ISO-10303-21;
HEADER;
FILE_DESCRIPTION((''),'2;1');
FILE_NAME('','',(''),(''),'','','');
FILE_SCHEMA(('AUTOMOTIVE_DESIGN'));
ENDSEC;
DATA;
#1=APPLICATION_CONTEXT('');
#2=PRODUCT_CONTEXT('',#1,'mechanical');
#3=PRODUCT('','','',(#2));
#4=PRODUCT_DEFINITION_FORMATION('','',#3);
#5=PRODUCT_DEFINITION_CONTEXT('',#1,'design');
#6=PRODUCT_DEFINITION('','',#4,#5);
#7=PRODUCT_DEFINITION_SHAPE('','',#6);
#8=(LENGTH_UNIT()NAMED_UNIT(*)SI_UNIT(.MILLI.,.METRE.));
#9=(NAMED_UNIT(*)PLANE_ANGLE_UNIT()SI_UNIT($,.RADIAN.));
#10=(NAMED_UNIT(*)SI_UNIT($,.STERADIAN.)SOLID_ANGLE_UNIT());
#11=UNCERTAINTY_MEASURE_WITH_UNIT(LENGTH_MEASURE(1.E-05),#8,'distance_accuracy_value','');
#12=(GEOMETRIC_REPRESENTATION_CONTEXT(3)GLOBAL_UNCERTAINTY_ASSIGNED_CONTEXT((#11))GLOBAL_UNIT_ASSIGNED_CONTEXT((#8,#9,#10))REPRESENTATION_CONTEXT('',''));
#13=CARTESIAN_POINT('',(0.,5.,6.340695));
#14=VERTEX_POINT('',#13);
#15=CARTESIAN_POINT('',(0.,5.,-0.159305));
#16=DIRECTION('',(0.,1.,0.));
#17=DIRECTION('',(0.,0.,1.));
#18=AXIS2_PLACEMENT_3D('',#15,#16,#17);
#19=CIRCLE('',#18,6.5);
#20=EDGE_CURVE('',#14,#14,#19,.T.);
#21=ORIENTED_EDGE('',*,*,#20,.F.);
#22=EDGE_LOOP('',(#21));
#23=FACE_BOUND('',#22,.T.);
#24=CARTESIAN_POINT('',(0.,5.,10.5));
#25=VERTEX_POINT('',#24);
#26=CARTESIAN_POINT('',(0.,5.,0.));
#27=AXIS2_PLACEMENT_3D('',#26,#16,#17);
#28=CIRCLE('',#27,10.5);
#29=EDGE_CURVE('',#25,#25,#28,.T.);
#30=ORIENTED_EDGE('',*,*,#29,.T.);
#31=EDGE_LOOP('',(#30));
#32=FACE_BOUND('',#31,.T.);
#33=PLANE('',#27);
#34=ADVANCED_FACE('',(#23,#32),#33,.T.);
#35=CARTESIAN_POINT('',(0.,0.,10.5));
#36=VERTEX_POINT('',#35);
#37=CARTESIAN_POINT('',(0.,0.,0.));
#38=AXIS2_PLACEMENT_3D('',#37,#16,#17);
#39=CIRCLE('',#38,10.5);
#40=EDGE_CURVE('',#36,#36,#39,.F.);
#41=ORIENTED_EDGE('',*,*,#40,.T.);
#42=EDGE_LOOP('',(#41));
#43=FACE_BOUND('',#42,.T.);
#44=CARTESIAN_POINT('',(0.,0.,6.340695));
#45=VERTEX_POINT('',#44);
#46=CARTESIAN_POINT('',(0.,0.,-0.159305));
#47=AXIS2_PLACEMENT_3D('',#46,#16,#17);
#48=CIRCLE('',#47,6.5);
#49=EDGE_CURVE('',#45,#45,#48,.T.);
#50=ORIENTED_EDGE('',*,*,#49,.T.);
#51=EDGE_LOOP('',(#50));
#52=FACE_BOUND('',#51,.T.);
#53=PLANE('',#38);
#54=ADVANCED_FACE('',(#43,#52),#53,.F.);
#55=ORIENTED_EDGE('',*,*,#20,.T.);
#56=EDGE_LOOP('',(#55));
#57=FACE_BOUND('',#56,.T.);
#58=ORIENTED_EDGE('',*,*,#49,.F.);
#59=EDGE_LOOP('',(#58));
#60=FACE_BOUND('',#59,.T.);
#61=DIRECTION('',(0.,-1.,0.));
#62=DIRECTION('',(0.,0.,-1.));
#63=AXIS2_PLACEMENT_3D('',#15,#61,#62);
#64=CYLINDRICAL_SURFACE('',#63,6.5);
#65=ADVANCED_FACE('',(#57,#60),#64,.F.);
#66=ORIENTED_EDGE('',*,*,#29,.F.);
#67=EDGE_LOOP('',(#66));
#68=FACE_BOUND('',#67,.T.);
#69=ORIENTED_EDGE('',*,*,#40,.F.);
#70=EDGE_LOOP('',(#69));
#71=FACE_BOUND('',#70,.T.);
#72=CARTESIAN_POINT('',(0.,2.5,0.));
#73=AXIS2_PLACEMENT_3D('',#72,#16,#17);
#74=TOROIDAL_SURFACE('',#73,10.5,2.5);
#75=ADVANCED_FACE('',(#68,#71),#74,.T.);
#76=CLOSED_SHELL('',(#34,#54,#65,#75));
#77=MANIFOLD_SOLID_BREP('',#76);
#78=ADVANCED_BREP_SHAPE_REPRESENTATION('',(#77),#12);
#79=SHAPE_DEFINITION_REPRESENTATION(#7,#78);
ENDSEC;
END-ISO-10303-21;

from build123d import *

# Parameters (mm, degrees)
ESQUISSE1_R        = 13
ESQUISSE1_R_2      = 6.5
BOSS_EXTRU_1_DEPTH = 5
CONG_4_R           = 2.5


with BuildPart() as part:
    # Esquisse1 → Boss.-Extru.1 (new body)
    with BuildSketch(Plane(origin=(0, 0, 0), x_dir=(1, 0, 0), z_dir=(0, 1, 0))):
        with Locations(Location((0, 0, 0), (0, 0, 270))):
            Circle(ESQUISSE1_R)
        with Locations(Location((0, 0.159304864, 0), (0, 0, 270))):
            Circle(ESQUISSE1_R_2, mode=Mode.SUBTRACT)
    extrude(amount=BOSS_EXTRU_1_DEPTH)

    # Congé4
    cong_4_edges = [part.edges().sort_by_distance(p)[0] for p in [
        (0, 0, -13),
        (0, 5, -13),
    ]]
    fillet(cong_4_edges, radius=CONG_4_R - 0.0001)  # a hair under: the kernel refuses the full size


solid = part.part
